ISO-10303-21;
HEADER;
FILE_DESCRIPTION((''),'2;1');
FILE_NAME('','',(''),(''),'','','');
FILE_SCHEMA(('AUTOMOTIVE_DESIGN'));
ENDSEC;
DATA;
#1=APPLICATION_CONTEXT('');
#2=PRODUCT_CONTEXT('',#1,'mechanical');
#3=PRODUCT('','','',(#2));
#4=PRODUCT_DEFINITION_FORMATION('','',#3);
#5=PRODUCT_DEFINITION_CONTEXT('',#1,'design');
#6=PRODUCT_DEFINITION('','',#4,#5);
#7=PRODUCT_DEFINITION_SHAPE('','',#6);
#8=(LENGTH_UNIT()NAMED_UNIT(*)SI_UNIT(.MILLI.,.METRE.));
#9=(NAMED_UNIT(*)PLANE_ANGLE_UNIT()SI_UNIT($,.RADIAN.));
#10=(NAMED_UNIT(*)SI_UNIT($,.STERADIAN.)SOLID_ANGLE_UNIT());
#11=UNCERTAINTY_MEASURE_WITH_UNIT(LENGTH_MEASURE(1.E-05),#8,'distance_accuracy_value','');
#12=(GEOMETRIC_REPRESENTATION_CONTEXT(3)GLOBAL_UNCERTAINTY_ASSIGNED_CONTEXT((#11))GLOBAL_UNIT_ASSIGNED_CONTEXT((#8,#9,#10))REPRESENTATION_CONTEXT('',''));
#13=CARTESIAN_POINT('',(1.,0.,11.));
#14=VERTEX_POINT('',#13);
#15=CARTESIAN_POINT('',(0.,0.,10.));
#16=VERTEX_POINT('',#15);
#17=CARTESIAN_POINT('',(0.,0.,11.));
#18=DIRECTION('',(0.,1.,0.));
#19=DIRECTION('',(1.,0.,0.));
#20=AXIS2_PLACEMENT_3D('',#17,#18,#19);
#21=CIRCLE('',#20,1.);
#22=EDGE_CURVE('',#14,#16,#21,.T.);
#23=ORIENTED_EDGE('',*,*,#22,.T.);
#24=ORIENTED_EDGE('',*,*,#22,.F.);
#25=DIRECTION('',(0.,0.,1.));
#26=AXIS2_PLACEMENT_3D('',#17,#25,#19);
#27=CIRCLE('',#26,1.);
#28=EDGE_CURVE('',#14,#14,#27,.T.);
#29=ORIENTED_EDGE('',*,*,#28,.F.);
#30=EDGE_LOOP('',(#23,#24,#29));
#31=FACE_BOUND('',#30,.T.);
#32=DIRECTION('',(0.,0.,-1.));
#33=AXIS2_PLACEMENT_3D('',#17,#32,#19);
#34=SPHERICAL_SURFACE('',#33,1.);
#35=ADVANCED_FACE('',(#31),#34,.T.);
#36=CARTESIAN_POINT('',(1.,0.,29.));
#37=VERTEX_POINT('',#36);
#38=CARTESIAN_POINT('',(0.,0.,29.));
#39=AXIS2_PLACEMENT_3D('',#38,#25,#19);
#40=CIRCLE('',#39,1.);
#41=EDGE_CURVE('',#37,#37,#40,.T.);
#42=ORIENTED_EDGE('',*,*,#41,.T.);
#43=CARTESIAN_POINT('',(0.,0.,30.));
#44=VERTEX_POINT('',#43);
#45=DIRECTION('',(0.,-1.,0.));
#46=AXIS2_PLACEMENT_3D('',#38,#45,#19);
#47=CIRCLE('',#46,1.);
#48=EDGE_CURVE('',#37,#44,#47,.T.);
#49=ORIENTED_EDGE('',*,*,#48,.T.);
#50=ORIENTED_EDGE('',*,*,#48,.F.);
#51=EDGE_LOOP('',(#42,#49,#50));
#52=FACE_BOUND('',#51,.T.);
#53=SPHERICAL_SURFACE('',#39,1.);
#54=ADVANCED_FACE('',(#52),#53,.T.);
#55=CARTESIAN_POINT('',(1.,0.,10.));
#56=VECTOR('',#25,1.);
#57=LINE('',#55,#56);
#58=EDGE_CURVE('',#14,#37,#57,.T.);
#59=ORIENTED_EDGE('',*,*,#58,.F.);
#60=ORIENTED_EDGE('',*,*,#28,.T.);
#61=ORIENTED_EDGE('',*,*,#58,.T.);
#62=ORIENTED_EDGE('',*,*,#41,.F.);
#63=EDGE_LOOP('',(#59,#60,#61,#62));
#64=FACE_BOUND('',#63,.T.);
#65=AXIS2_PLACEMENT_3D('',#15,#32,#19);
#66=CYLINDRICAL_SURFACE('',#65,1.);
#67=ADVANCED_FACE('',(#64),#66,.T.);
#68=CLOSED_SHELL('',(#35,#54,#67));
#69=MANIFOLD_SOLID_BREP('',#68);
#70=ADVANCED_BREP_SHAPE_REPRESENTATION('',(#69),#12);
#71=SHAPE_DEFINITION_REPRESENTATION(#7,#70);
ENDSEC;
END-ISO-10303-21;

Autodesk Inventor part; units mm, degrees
ref_plane "YZ Plane" through (0, 0, 0) normal (1, 0, 0) x (0, 1, 0)
ref_plane "XZ Plane" through (0, 0, 0) normal (0, 1, 0) x (-1, 0, 0)
ref_plane "XY Plane" through (0, 0, 0) normal (0, 0, 1) x (1, 0, 0)
sketch "Sketch1" plane through (0, 0, 0) normal (0, 0, 1) x (1, 0, 0)
  circle A0 centre (0, 0) radius 2
  dimension "d6" = 4
extrude "Extrusion2" add sketch "Sketch1" along normal blind 40
fillet "Fillet4" radius 2 2 edges at (-2, 0, 0) (-2, 0, 40)
scale "Scale1" factors (0.5, 0.5, 0.5) then translate (0, 0, 10) bodies 1
properties part number "Pasador"
